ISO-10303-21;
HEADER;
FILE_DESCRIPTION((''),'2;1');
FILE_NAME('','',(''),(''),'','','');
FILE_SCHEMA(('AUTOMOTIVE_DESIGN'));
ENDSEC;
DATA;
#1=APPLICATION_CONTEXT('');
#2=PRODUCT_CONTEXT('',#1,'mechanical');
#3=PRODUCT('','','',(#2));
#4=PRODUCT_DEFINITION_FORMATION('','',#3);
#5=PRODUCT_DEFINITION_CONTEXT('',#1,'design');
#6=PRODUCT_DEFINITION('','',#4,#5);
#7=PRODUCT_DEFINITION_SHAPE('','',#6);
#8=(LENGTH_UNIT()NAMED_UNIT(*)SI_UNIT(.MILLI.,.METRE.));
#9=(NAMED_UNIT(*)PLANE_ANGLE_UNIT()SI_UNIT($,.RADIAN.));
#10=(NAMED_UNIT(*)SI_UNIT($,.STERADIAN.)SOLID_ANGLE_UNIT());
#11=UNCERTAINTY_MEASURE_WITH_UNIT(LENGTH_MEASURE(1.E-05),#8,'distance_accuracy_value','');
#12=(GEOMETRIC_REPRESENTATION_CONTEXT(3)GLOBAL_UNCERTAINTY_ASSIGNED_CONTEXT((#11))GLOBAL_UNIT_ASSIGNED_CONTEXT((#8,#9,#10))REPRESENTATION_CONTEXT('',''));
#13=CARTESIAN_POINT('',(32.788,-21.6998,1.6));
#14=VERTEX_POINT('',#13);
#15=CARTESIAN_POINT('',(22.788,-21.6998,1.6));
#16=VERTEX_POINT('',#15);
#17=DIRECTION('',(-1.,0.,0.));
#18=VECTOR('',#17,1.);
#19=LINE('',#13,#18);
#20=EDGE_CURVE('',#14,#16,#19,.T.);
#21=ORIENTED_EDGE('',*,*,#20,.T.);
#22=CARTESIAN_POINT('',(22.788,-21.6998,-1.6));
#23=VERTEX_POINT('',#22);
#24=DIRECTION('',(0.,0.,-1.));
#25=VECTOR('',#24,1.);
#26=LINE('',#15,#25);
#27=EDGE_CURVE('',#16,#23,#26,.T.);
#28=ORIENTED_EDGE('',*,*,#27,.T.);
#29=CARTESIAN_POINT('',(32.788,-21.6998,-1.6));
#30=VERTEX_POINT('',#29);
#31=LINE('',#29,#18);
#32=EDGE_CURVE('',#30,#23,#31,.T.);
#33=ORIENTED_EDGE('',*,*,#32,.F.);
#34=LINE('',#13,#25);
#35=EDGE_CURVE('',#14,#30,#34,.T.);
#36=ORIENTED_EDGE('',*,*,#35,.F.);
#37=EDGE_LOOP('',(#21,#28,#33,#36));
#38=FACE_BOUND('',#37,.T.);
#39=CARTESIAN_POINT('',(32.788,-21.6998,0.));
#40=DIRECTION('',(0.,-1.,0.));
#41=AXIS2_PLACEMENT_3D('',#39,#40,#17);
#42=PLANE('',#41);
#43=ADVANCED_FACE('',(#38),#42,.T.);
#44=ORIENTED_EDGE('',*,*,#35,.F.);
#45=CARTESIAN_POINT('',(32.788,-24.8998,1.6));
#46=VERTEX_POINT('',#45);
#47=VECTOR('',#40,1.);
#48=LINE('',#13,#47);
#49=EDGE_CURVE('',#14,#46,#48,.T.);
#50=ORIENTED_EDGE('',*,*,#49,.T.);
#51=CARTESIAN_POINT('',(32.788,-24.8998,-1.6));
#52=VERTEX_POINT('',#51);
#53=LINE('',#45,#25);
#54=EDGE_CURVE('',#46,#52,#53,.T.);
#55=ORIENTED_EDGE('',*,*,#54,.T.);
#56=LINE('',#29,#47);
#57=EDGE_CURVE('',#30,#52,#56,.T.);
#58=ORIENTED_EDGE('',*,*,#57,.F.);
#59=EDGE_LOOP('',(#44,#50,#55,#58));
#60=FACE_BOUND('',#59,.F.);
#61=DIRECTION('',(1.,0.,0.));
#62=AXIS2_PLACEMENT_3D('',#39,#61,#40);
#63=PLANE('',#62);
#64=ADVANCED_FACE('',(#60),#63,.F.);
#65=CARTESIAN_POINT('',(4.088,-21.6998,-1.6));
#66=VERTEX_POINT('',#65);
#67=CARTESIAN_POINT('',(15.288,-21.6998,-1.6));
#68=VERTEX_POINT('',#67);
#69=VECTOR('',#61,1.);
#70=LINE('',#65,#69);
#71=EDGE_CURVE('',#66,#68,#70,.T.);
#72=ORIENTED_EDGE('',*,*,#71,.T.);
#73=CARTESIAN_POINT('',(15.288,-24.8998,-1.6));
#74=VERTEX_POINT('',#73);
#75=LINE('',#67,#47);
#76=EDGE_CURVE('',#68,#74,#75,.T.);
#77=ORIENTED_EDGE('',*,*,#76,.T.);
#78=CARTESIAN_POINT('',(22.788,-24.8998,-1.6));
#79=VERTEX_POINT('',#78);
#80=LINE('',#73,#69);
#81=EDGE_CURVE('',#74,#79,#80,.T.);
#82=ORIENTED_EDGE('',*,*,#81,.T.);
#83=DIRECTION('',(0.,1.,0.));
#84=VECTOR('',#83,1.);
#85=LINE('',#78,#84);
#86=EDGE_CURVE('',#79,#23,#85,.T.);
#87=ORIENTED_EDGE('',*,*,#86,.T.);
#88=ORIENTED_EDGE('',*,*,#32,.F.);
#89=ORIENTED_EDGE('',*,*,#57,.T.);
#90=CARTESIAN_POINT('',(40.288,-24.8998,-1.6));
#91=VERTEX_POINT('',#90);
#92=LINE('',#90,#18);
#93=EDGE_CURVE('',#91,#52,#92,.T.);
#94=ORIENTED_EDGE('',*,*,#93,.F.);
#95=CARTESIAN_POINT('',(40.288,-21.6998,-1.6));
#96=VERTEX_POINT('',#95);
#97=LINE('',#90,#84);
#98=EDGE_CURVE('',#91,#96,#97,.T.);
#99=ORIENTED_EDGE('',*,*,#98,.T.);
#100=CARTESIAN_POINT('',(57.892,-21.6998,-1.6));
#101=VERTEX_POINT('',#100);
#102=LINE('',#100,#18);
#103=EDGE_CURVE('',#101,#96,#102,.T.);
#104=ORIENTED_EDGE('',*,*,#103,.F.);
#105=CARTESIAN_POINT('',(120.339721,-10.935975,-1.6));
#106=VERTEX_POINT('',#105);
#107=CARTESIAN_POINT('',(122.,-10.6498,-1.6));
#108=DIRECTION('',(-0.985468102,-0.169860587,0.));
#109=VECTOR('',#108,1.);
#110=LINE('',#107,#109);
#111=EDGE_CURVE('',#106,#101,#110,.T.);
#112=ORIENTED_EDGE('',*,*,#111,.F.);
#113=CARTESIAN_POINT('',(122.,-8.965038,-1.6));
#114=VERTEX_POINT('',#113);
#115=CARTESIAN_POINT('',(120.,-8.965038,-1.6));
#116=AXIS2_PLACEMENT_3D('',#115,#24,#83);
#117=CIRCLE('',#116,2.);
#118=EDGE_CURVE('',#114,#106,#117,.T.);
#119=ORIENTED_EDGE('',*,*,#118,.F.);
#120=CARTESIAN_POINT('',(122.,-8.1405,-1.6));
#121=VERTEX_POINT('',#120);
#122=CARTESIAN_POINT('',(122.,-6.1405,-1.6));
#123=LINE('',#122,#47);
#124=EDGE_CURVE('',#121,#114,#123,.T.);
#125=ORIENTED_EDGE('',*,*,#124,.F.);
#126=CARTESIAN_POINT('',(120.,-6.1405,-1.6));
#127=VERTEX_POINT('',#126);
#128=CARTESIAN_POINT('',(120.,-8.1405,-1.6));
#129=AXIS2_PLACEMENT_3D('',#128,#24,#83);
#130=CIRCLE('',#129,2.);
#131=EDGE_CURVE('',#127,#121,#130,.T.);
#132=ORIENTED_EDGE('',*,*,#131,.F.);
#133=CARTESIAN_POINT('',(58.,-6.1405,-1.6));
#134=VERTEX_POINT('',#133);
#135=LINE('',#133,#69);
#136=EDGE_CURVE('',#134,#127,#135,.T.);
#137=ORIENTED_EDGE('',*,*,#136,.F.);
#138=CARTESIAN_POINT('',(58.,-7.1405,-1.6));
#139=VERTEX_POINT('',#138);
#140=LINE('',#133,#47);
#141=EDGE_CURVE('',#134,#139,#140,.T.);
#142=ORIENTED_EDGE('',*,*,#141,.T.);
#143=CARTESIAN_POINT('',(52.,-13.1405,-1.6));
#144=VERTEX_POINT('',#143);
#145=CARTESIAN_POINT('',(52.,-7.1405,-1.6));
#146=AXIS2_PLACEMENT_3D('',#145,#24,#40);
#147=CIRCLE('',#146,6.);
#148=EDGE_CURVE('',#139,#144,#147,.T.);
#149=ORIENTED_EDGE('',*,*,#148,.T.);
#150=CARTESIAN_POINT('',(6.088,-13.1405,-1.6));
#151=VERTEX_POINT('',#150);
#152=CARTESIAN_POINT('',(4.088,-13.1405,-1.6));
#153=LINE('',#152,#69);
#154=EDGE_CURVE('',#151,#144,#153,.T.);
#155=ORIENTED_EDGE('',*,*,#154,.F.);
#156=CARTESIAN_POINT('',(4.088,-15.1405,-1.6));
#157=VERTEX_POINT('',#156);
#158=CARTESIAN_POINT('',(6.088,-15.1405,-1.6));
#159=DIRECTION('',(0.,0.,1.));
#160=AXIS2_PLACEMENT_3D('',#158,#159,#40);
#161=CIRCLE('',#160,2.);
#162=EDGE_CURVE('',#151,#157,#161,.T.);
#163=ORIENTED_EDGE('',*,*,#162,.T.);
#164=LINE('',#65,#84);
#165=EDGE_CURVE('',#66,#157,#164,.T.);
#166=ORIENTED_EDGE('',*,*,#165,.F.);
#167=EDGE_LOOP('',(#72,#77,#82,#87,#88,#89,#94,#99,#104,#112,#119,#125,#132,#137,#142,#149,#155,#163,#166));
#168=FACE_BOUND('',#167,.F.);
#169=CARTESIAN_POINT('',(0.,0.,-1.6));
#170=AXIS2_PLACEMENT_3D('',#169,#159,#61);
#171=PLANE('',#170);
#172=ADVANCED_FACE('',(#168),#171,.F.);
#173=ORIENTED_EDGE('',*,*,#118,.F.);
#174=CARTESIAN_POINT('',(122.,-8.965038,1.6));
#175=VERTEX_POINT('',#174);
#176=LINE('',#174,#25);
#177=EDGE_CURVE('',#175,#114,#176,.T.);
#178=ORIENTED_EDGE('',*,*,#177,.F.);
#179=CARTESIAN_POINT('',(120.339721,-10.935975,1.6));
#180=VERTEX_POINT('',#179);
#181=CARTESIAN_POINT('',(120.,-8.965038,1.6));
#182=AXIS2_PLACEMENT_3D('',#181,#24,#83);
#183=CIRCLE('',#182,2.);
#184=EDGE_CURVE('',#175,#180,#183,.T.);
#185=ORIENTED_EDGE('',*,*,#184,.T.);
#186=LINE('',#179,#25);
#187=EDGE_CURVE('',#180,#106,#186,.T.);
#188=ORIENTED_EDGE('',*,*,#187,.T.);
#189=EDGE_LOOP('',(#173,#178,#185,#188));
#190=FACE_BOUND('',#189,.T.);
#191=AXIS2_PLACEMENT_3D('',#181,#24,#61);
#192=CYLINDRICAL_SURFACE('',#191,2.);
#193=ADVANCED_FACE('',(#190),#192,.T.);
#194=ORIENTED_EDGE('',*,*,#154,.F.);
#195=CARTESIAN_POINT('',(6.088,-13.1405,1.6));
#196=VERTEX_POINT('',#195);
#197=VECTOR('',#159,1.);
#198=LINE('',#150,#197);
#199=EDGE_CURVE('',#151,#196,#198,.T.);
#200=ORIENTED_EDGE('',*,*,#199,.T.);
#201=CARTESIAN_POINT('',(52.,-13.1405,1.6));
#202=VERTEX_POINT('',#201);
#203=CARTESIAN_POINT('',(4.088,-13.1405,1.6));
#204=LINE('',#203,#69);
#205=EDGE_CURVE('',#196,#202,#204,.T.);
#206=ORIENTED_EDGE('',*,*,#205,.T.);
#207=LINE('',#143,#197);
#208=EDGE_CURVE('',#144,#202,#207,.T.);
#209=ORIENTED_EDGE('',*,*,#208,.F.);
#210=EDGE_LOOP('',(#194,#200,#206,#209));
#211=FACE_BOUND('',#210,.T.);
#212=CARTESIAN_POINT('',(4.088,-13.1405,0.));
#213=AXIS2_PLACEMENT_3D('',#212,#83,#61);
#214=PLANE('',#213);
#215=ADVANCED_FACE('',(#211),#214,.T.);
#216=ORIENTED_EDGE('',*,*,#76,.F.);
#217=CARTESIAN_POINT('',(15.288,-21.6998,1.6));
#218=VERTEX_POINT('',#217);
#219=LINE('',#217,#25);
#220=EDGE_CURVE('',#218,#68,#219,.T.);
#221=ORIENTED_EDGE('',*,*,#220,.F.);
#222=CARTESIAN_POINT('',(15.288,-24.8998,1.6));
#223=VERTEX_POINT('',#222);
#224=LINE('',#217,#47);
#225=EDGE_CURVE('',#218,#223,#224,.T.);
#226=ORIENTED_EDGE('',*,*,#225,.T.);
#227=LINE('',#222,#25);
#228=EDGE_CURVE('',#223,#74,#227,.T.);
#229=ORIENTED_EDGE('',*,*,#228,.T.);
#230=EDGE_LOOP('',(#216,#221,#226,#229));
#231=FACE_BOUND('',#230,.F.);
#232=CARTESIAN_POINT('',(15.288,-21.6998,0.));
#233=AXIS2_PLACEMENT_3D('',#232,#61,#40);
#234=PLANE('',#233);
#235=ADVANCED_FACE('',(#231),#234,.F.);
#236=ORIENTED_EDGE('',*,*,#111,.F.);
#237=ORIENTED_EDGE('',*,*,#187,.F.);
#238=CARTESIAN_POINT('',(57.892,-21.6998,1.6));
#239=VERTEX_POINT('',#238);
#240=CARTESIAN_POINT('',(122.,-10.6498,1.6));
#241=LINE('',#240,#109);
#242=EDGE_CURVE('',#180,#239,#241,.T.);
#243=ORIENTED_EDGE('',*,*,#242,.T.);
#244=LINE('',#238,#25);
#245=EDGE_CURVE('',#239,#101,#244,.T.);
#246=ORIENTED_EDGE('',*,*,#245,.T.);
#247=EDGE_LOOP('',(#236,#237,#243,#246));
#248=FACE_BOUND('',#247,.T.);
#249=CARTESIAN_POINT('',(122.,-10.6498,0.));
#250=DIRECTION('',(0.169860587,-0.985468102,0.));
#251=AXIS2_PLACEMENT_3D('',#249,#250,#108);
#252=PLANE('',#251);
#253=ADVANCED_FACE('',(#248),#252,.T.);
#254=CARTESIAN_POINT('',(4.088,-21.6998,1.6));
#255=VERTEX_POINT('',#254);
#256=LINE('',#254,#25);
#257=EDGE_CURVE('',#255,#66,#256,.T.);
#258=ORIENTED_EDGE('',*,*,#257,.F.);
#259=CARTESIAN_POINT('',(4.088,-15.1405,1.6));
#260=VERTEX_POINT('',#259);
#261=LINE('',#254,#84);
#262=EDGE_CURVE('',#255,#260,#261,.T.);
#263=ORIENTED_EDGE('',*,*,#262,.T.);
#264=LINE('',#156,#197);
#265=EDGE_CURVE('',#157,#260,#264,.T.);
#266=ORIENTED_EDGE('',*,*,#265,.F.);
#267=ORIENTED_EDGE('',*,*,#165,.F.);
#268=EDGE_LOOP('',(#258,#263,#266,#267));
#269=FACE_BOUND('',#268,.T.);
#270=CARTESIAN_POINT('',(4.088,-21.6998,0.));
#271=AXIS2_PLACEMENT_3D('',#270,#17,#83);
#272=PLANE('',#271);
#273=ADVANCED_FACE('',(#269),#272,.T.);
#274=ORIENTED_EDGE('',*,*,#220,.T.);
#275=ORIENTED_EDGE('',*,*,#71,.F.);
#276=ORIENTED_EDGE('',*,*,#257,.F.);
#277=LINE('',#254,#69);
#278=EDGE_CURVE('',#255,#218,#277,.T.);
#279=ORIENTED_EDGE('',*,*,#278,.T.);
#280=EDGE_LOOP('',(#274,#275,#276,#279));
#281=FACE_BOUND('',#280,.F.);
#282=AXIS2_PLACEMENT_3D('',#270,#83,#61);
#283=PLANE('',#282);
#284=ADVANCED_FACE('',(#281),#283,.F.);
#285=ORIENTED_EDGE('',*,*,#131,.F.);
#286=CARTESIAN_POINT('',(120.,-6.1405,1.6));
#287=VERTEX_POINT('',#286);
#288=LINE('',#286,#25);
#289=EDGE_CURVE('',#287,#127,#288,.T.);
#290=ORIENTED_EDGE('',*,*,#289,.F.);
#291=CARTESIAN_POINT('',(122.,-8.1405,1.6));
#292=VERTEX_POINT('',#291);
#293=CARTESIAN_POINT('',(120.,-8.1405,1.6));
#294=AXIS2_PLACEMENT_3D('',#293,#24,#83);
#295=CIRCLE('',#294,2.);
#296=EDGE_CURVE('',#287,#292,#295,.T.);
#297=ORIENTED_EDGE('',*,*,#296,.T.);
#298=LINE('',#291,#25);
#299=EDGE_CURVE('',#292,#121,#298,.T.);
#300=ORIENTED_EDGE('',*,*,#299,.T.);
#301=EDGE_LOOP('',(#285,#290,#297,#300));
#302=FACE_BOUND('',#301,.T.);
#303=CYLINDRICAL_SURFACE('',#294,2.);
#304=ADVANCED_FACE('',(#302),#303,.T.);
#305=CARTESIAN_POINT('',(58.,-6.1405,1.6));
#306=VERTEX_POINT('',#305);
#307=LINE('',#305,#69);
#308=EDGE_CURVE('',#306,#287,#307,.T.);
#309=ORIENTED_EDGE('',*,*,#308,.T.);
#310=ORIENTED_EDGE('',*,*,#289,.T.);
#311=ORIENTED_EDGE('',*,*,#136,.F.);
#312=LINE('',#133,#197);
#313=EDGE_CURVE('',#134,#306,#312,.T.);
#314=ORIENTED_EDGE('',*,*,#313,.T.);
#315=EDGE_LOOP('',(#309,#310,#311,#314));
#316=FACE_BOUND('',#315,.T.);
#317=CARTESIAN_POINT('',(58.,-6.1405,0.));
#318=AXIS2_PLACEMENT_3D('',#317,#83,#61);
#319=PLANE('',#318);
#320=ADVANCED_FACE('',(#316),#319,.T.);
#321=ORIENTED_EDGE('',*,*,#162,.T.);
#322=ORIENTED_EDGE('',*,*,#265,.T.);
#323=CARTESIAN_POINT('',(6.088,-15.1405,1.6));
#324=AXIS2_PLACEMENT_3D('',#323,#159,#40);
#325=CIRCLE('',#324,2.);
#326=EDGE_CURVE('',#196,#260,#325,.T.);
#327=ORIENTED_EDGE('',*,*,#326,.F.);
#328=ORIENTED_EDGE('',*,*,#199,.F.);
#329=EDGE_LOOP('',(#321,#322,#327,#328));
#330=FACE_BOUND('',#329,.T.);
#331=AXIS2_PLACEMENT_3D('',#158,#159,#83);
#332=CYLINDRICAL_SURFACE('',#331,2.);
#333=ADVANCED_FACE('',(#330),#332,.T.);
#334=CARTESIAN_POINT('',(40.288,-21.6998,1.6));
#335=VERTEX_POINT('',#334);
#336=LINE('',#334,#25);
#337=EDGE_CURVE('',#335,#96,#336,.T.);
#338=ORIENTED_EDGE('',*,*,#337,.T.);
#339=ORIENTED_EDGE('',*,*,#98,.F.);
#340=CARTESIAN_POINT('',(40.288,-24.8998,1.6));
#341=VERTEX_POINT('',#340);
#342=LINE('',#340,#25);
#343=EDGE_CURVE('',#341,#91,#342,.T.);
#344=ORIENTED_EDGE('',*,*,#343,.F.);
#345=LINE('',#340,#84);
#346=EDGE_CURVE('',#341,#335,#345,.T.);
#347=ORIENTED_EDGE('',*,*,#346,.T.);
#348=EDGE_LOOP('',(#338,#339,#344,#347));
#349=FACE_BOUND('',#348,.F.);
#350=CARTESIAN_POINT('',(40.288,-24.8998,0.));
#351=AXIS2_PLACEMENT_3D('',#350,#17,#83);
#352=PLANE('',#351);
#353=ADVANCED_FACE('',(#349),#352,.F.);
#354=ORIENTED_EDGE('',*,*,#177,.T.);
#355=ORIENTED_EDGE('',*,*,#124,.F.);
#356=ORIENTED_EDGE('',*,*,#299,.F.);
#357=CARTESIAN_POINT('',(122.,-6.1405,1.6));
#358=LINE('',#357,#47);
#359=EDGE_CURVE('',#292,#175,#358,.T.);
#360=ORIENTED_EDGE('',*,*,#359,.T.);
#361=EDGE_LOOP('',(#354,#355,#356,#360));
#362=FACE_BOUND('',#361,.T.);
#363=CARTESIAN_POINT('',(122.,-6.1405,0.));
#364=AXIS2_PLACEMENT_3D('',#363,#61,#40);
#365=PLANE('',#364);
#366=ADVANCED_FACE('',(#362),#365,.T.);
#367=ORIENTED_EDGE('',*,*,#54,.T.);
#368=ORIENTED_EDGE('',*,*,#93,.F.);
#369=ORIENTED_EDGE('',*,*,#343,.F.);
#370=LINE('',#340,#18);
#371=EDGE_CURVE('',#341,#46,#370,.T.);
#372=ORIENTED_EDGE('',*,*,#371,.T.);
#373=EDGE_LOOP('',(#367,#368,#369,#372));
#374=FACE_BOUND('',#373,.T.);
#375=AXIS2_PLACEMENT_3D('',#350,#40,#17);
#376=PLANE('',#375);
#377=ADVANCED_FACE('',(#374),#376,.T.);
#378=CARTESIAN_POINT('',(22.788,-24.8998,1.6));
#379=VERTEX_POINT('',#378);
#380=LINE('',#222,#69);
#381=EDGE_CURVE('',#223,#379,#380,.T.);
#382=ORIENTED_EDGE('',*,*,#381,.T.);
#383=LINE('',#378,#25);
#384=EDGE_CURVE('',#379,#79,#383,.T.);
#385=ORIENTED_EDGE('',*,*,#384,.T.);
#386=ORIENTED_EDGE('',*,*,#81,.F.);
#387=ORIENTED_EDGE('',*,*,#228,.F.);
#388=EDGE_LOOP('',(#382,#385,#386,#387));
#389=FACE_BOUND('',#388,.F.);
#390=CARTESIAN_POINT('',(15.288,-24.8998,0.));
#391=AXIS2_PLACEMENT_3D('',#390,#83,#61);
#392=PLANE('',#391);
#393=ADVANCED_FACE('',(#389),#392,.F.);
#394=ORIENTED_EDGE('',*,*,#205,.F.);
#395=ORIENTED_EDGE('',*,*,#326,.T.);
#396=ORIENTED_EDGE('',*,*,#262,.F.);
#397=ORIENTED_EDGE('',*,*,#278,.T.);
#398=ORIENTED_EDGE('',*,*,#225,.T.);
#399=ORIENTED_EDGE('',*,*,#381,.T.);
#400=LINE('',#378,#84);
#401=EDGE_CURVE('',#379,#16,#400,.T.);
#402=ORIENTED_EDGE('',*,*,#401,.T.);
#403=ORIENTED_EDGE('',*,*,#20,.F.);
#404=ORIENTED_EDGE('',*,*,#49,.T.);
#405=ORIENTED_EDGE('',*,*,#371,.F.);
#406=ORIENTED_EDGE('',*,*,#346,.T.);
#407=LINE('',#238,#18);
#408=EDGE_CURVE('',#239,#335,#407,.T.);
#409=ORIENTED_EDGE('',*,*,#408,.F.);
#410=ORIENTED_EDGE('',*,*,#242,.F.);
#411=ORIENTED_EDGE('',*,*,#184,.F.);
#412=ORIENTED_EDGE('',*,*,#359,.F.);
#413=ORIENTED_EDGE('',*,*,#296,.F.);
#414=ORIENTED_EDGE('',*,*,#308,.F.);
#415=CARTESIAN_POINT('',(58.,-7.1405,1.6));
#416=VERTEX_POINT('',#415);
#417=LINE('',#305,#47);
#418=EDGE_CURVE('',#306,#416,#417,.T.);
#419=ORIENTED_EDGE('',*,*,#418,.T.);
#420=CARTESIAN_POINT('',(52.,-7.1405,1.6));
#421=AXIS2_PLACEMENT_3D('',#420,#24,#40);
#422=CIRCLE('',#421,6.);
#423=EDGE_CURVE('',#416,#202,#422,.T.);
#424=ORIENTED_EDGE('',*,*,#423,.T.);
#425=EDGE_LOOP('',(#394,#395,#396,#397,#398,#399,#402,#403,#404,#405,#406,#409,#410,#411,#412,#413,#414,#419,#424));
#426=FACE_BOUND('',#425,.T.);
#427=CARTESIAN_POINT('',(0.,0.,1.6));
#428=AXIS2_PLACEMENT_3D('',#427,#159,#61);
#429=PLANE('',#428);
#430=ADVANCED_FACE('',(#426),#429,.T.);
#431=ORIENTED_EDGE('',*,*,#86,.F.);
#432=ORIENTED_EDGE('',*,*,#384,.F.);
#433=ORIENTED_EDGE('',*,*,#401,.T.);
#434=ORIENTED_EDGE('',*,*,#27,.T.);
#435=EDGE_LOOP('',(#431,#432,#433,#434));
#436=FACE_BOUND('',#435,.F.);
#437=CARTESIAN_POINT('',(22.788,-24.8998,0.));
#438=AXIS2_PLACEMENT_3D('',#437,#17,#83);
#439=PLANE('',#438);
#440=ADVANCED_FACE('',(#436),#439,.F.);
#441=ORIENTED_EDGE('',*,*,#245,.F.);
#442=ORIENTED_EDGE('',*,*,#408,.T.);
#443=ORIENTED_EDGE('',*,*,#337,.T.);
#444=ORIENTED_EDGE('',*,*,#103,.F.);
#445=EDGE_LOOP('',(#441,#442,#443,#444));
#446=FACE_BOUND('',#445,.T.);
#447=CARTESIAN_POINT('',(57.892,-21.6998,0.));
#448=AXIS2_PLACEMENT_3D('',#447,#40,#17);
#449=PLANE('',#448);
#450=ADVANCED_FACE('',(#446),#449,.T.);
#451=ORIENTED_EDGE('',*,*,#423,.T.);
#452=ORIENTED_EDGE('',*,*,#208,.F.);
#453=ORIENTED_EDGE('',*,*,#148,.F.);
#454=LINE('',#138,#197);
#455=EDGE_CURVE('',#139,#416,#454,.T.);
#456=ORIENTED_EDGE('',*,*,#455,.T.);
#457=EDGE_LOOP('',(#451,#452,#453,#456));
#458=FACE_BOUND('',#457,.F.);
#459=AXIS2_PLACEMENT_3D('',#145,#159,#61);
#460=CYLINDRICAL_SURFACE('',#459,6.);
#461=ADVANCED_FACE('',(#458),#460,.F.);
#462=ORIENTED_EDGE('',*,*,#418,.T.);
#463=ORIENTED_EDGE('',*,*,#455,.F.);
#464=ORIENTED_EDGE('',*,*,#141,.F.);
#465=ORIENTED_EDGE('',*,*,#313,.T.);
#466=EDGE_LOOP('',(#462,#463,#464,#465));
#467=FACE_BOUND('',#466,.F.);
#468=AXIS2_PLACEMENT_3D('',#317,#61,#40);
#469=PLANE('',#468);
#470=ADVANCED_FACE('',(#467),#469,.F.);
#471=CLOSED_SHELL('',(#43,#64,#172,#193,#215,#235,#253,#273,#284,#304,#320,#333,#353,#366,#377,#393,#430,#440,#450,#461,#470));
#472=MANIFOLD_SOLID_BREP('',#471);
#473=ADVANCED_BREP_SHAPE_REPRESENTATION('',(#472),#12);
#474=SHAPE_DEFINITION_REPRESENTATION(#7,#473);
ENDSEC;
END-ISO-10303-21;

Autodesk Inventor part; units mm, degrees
ref_plane "YZ Plane" through (0, 0, 0) normal (1, 0, 0) x (0, 1, 0)
ref_plane "XZ Plane" through (0, 0, 0) normal (0, 1, 0) x (-1, 0, 0)
ref_plane "XY Plane" through (0, 0, 0) normal (0, 0, 1) x (1, 0, 0)
sketch "Sketch1" plane through (0, 0, 0) normal (0, 0, 1) x (1, 0, 0)
  line L0 (58, -6.1405) -> (122, -6.1405)
  line L1 (122, -6.1405) -> (122, -10.6498)
  line L2 (122, -10.6498) -> (57.892, -21.6998)
  line L3 (4.088, -21.6998) -> (15.288, -21.6998)
  line L4 (15.288, -21.6998) -> (15.288, -24.8998)
  line L5 (15.288, -24.8998) -> (22.788, -24.8998)
  line L6 (22.788, -24.8998) -> (22.788, -21.6998)
  line L7 (32.788, -21.6998) -> (32.788, -24.8998)
  line L8 (40.288, -24.8998) -> (40.288, -21.6998)
  line L9 (58, -6.1405) -> (122, -6.1405)
  line L10 (122, -6.1405) -> (122, -10.6498)
  line L11 (57.892, -21.6998) -> (122, -10.6498)
  line L12 (57.892, -21.6998) -> (40.288, -21.6998)
  line L13 (40.288, -24.8998) -> (40.288, -21.6998)
  line L14 (40.288, -24.8998) -> (32.788, -24.8998)
  line L15 (32.788, -24.8998) -> (32.788, -21.6998)
  line L16 (32.788, -21.6998) -> (22.788, -21.6998)
  line L17 (22.788, -24.8998) -> (22.788, -21.6998)
  line L18 (15.288, -24.8998) -> (22.788, -24.8998)
  line L19 (15.288, -24.8998) -> (15.288, -21.6998)
  line L20 (15.288, -21.6998) -> (4.088, -21.6998)
  line L21 (58, -6.1405) -> (58, -13.1405)
  line L22 (4.088, -21.6998) -> (4.088, -13.1405)
  line L23 (4.088, -13.1405) -> (58, -13.1405)
  point P0 (0, 0)
  point P1 (0, 0)
  dimension "d1" = 11.2
  dimension "d2" = 7.5
  dimension "d3" = 10
  dimension "d4" = 7.5
  dimension "d15" = 21.6998
  dimension "d20" = 7
  dimension "d21" = 58
  dimension "d22" = 122
  dimension "d25" = 17.604
  dimension "d27" = 4.088
extrude "Plate1" add sketch "Sketch1" along normal mid plane 3.2
fillet "Corner Round3" radius 6 1 edges at (58, -13.1405, 0)
fillet "Corner Round4" radius 2 3 edges at (122, -6.1405, 0) (122, -10.6498, 0) (4.088, -13.1405, 0)
equation "\"d4\" = d2"
equation "\"d0\" = Thickness"
equation "\"BendRadius\" = Thickness"
equation "\"BendReliefWidth\" = Thickness"
equation "\"BendReliefDepth\" = 0.5 * Thickness"
equation "\"CornerReliefSize\" = 4 * Thickness"
equation "\"MinimumRemnant\" = 2 * Thickness"
equation "\"TransitionRadius\" = BendRadius"
equation "\"JacobiRadiusSize\" = BendRadius"
equation "\"GapSize\" = Thickness"
equation "\"Thickness\" = 3.2"
properties part number "cuerpo_chapa"
